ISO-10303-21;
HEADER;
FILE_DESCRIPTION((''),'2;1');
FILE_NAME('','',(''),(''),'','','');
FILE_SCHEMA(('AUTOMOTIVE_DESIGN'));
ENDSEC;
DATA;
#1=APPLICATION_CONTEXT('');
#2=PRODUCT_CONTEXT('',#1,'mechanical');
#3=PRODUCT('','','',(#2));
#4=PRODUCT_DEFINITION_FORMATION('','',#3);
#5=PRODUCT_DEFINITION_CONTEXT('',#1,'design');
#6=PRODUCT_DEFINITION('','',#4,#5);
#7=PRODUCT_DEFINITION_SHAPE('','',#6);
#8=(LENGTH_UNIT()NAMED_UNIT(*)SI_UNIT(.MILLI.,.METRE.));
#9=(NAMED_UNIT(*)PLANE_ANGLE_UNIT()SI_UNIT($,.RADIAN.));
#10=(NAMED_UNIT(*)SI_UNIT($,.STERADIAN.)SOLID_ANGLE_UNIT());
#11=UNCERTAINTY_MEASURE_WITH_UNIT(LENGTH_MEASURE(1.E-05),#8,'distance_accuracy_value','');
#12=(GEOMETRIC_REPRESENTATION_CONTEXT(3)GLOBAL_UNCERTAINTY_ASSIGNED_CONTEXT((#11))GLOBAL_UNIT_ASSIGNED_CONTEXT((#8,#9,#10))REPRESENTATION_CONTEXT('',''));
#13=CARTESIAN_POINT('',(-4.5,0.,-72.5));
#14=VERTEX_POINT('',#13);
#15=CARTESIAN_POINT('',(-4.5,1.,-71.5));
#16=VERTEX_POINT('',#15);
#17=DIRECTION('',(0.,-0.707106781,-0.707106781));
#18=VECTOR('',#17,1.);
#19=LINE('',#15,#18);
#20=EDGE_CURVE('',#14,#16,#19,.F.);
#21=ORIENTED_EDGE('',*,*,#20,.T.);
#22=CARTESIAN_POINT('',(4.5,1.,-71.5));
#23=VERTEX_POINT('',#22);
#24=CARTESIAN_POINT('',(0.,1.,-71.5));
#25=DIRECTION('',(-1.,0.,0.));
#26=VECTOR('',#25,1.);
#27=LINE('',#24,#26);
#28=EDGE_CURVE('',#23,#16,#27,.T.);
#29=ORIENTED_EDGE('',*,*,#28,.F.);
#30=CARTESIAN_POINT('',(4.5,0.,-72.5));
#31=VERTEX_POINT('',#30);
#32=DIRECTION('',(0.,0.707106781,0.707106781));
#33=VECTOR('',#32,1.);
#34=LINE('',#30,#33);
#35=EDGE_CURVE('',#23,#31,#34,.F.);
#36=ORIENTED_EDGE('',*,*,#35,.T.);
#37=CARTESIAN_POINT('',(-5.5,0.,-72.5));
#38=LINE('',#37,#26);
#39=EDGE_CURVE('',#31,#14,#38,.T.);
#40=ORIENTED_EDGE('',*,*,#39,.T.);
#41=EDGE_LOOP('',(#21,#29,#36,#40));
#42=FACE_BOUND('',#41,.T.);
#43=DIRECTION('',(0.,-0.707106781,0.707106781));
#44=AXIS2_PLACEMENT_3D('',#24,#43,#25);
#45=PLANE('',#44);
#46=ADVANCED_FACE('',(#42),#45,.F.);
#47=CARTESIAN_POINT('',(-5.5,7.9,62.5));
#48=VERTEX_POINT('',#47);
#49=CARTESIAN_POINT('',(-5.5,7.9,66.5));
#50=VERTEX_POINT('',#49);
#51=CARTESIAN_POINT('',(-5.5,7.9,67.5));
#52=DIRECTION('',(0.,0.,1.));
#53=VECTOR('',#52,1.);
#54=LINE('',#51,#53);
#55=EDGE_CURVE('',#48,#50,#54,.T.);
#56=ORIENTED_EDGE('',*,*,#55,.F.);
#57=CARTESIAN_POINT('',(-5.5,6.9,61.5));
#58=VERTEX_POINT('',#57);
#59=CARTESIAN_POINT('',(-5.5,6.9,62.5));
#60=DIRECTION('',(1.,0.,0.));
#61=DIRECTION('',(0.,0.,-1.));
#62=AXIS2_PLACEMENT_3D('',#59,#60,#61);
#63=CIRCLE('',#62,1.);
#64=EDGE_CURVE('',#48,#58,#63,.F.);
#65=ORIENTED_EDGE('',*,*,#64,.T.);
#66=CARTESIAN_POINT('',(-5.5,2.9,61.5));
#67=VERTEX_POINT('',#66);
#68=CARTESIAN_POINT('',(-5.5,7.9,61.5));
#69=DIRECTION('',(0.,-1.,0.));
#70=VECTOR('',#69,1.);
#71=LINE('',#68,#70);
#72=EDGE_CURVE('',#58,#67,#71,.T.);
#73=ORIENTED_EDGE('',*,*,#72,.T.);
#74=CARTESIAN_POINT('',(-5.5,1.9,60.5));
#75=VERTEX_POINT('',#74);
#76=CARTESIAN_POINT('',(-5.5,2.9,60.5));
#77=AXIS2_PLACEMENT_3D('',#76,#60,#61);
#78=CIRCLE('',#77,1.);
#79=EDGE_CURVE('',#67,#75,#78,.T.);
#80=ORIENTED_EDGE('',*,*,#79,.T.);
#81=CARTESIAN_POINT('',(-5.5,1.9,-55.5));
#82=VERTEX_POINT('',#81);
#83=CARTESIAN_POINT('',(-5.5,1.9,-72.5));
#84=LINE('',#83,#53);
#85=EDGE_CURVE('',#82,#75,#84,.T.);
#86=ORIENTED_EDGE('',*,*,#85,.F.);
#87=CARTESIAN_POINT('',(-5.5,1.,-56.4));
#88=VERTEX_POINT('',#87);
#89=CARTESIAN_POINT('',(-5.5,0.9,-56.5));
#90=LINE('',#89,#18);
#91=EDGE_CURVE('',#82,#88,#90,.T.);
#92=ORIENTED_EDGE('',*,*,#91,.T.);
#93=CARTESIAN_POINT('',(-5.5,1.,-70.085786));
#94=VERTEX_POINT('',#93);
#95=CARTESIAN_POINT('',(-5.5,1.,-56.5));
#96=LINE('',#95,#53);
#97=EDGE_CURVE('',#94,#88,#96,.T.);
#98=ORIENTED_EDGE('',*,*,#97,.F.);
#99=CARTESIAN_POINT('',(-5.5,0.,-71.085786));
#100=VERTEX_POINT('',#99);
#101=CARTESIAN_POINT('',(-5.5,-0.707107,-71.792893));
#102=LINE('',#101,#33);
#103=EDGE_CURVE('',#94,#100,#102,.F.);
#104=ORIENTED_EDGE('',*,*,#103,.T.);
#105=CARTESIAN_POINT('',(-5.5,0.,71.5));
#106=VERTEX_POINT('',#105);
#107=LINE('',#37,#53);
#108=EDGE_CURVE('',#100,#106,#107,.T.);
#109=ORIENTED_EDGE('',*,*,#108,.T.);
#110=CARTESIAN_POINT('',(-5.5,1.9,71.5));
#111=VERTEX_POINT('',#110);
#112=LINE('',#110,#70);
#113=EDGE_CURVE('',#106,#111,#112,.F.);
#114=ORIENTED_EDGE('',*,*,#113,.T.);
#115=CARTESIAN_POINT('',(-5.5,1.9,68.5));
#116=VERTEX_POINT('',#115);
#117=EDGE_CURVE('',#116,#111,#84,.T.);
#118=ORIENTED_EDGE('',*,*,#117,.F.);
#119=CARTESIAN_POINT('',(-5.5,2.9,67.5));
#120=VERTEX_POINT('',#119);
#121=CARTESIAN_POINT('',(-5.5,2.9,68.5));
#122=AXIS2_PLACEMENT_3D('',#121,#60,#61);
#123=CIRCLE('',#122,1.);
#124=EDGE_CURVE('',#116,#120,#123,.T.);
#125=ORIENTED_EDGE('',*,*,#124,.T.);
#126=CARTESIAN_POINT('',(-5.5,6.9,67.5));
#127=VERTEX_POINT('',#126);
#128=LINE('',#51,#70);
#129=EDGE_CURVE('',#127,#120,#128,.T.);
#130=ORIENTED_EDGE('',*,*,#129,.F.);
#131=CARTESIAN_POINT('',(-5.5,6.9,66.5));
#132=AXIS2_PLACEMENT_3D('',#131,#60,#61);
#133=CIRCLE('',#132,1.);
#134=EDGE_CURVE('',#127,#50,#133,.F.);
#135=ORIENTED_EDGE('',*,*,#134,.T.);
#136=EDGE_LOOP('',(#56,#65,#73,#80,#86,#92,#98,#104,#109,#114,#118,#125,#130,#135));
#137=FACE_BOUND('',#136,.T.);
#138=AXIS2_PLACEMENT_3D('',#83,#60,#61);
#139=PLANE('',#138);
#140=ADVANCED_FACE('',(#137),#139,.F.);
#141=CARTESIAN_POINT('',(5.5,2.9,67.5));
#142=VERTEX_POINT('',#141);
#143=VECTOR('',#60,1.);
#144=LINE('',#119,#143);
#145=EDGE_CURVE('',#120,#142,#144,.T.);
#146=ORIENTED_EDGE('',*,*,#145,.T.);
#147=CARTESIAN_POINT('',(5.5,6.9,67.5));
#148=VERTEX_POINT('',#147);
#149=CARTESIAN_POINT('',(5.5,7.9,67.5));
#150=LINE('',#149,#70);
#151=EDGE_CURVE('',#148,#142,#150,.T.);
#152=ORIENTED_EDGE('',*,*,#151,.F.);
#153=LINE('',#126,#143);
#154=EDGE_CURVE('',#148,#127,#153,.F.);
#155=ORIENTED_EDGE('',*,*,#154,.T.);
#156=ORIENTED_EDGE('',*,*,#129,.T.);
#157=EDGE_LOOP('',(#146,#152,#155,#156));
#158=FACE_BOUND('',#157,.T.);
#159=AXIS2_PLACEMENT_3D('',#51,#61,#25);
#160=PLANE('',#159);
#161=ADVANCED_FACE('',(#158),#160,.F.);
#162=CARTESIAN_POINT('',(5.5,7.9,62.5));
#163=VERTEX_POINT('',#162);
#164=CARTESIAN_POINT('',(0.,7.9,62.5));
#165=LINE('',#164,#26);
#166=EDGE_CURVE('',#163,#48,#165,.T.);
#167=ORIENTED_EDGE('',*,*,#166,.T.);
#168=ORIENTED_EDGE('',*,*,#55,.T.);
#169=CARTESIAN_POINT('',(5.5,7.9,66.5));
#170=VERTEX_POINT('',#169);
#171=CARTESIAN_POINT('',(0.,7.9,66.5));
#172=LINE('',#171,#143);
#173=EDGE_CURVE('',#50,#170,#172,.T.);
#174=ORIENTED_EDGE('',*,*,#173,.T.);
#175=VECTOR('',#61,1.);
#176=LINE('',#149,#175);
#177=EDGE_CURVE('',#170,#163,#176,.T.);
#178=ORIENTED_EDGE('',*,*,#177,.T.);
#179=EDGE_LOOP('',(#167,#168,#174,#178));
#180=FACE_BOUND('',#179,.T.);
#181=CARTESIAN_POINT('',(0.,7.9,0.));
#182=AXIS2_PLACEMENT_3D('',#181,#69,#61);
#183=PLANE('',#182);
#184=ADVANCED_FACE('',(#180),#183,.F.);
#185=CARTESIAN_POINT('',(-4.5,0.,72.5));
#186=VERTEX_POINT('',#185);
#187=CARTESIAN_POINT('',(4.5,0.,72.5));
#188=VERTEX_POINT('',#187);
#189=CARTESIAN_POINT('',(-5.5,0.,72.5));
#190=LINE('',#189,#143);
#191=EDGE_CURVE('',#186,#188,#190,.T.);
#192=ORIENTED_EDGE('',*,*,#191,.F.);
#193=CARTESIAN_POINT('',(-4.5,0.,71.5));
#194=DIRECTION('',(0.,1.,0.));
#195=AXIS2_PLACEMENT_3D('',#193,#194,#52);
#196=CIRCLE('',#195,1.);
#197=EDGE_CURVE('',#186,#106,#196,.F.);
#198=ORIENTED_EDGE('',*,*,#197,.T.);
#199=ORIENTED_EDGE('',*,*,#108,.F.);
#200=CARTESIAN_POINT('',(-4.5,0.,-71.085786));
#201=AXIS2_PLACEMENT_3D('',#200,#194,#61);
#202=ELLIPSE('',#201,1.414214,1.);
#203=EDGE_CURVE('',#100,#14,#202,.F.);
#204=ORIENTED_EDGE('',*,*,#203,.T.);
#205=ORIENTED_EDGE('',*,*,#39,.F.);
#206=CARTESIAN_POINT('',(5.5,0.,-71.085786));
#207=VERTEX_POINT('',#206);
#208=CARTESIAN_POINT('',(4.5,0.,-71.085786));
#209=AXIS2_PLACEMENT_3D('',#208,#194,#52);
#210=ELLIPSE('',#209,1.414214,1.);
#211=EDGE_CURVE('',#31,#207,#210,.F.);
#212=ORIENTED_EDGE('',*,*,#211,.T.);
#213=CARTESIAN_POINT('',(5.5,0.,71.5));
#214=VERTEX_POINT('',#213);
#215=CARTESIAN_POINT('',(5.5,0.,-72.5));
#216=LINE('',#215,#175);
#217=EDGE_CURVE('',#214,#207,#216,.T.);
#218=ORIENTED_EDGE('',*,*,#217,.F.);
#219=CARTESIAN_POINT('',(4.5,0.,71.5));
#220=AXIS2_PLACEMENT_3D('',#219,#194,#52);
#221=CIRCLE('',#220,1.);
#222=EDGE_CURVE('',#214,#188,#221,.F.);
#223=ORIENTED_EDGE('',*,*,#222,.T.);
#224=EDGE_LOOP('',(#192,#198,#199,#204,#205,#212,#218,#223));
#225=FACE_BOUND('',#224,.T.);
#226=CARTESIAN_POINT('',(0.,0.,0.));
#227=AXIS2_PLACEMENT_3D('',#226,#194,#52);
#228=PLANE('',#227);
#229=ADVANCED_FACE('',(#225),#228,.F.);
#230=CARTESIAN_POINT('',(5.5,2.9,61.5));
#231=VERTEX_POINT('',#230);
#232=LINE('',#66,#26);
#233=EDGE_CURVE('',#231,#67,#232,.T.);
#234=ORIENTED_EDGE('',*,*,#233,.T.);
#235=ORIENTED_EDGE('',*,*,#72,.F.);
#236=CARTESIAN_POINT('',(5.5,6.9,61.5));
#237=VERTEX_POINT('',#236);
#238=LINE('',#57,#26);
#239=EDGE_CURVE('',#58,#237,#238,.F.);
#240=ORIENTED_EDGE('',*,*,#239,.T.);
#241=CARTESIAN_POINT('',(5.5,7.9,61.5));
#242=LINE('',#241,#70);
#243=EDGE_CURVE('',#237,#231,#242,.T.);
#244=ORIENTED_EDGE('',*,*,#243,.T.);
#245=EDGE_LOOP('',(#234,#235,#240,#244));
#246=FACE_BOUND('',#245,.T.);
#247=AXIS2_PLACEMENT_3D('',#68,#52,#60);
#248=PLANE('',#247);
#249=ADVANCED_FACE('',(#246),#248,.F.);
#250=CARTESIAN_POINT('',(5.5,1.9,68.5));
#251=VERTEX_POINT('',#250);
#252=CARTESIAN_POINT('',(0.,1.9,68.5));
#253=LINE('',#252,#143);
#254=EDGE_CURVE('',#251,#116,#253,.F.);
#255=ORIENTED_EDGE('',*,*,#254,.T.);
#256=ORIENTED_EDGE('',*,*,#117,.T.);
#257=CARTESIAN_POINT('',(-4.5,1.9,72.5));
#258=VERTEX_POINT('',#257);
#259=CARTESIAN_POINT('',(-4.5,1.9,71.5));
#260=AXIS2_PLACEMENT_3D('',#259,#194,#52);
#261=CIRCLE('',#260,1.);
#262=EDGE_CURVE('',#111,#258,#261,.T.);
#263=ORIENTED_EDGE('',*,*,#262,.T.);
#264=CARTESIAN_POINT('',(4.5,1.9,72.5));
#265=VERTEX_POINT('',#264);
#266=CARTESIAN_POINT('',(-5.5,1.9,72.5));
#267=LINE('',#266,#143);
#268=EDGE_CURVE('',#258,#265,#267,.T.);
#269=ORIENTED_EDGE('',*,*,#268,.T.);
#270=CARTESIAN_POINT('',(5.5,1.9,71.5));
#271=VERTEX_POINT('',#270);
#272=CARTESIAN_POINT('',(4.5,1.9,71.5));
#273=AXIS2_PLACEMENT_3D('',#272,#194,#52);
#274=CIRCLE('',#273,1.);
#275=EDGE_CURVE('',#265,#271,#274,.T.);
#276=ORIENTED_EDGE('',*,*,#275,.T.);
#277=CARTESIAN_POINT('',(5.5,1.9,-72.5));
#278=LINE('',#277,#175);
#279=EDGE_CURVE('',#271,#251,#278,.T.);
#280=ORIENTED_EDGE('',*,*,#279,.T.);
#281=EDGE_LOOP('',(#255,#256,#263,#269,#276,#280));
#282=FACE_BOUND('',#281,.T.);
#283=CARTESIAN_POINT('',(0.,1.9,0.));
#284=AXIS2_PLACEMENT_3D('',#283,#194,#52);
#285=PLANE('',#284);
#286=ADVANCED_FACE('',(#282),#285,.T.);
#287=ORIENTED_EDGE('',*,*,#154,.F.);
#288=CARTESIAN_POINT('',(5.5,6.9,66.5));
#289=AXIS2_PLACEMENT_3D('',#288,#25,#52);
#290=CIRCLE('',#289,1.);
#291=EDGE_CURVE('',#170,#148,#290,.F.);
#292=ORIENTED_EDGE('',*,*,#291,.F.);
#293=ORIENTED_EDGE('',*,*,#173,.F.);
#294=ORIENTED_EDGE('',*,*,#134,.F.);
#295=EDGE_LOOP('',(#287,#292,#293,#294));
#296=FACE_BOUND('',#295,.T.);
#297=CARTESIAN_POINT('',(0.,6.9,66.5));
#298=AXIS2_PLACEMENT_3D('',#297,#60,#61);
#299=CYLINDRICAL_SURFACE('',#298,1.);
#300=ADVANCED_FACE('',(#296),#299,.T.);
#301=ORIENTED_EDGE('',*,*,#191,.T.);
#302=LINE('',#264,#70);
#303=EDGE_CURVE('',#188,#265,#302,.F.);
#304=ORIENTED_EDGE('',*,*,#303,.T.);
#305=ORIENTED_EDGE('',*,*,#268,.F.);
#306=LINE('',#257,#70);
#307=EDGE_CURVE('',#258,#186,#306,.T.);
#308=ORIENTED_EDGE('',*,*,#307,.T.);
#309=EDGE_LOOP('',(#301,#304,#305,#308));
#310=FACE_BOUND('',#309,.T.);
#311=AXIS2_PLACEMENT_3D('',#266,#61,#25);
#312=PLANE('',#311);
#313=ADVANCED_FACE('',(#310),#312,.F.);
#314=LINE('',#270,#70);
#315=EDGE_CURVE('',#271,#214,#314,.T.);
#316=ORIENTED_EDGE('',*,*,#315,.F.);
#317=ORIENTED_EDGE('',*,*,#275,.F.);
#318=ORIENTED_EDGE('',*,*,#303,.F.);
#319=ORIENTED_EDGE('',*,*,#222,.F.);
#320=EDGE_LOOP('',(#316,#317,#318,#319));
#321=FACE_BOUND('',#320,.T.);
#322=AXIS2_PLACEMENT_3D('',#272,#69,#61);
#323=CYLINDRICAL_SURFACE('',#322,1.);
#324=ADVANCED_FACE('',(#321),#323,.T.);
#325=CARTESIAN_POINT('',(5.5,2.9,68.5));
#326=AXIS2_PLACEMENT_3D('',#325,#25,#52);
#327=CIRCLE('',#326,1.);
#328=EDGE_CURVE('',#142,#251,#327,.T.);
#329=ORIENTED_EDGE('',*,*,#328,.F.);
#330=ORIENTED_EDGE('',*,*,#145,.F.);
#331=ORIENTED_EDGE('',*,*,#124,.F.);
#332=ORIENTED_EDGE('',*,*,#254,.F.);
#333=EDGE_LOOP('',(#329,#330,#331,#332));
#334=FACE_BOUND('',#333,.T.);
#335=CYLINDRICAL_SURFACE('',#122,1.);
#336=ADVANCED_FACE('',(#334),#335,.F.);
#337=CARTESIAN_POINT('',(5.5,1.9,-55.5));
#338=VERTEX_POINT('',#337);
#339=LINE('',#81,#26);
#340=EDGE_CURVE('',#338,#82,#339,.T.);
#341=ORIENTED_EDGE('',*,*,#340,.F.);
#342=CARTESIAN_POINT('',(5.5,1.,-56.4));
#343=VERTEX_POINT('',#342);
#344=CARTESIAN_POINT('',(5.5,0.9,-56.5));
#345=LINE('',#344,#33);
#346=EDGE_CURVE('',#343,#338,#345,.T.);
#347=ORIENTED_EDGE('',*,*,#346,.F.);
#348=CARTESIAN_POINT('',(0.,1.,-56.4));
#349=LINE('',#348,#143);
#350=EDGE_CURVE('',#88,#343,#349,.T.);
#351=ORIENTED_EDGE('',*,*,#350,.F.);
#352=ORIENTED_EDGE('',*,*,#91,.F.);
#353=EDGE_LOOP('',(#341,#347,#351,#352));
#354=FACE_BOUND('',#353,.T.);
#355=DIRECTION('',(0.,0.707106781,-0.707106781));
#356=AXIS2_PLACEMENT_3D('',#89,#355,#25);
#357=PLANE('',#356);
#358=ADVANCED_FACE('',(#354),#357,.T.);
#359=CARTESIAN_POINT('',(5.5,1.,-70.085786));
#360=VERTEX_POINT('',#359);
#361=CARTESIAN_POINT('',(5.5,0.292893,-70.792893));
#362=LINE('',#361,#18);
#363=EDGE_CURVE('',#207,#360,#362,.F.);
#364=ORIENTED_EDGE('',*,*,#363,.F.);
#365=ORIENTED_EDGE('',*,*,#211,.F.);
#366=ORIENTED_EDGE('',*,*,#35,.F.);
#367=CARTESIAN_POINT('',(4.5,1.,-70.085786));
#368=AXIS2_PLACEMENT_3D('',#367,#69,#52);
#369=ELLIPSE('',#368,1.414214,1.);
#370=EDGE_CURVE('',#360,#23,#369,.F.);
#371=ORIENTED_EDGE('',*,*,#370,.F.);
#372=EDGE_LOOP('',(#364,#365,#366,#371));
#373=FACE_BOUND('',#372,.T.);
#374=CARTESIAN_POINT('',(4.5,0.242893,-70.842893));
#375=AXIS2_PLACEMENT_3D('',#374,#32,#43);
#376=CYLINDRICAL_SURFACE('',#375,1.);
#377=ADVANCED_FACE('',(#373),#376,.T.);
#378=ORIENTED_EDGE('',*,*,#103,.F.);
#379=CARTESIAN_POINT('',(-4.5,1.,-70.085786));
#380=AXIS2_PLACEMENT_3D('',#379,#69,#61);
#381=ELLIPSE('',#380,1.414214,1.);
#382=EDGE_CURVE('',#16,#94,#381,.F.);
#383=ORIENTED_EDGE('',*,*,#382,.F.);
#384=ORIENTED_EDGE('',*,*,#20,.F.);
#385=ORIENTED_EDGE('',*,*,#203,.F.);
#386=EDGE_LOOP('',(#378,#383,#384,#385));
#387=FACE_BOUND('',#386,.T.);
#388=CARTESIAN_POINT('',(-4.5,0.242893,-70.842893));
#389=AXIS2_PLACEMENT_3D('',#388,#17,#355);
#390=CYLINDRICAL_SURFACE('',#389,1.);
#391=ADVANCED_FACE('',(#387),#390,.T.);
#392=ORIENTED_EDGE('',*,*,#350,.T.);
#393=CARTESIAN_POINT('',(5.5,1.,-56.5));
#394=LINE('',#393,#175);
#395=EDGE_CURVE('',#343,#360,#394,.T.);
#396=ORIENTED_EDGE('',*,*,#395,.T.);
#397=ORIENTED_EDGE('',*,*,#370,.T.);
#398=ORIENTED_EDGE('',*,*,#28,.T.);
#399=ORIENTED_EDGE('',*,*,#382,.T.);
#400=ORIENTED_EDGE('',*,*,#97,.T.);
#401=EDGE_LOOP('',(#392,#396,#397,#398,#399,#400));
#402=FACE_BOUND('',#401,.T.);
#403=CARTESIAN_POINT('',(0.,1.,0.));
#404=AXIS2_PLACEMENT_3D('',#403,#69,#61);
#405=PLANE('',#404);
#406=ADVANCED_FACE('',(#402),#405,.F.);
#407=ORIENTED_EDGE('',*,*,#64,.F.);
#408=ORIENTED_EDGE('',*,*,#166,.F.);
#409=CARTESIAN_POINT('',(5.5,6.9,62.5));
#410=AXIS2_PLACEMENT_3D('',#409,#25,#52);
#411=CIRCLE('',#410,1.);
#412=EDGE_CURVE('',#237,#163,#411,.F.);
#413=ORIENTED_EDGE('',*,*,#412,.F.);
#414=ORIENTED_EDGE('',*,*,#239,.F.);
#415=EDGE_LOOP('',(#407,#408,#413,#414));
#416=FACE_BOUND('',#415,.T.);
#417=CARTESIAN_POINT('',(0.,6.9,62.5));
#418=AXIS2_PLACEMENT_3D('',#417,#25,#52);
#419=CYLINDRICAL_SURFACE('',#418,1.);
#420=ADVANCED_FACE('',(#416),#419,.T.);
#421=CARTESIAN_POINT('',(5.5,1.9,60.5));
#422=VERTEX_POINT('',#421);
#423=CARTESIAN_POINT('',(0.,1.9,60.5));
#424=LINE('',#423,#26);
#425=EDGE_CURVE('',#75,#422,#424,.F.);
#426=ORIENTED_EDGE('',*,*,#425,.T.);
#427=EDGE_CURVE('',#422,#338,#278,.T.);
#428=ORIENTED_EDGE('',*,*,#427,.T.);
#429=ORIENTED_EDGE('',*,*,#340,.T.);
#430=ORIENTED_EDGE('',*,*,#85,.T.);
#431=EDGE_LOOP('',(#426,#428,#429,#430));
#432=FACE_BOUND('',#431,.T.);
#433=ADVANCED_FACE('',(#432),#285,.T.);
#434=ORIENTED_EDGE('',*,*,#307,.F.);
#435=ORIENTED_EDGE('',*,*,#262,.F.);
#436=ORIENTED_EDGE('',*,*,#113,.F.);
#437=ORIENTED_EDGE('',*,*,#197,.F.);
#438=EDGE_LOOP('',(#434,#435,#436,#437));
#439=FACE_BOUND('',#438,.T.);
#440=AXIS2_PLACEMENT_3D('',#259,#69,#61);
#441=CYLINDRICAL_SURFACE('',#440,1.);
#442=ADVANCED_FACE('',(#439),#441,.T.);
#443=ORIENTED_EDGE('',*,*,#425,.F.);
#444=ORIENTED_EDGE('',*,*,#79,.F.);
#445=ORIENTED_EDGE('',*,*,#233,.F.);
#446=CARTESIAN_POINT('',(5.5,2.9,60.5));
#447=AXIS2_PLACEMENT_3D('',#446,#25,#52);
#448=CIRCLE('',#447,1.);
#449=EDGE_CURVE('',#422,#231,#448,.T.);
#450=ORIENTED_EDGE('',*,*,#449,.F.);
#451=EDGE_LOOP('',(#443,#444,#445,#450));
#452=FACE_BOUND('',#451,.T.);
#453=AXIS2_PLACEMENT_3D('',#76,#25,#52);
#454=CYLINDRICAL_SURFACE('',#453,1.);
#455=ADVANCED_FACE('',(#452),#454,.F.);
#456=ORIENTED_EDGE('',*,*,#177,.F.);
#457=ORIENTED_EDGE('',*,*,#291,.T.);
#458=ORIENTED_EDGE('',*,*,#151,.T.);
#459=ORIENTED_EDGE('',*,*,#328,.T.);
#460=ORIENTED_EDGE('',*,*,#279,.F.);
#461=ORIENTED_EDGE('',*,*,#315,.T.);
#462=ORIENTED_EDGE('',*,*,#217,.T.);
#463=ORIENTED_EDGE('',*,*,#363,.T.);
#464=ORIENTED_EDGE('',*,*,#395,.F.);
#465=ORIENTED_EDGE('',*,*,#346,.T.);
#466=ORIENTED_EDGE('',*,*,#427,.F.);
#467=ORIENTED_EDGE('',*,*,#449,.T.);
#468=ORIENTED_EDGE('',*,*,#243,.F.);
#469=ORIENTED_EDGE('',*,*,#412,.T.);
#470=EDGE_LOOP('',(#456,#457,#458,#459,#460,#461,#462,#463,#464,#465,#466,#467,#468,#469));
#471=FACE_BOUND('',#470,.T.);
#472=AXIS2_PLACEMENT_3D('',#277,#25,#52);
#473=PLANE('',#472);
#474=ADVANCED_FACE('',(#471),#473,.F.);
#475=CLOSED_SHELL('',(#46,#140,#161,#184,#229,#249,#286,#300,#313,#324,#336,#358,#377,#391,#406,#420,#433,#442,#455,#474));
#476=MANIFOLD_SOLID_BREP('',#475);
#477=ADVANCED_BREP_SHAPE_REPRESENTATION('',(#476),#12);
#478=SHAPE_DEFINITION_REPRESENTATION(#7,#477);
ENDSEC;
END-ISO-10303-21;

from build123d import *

# Parameters (mm, degrees)
SZKIC1_W                    = 11
SZKIC1_H                    = 145
DODANIE_WYCI_GNI_CIE1_DEPTH = 1.9
SZKIC3_W                    = 11
SZKIC3_H                    = 16
WYTNIJ_WYCI_GNI_CIE1_DEPTH  = 0.9
SFAZOWANIE1_SIZE            = 1
SZKIC2_W                    = 11
SZKIC2_H                    = 6
DODANIE_WYCI_GNI_CIE2_DEPTH = 6
ZAOKR_GLENIE1_R             = 1


with BuildPart() as part:
    # Szkic1 → Dodanie-wyciągnięcie1 (new body)
    with BuildSketch(Plane(origin=(0, 0, 0), x_dir=(1, 0, 0), z_dir=(0, 1, 0))):
        Rectangle(SZKIC1_W, SZKIC1_H)
    extrude(amount=DODANIE_WYCI_GNI_CIE1_DEPTH)

    # Szkic3 → Wytnij-wyciągnięcie1 (cut)
    with BuildSketch(Plane(origin=(0, 1.9, 0), x_dir=(1, 0, 0), z_dir=(0, 1, 0))):
        with Locations((0, 64.5)):
            Rectangle(SZKIC3_W, SZKIC3_H)
    extrude(amount=-WYTNIJ_WYCI_GNI_CIE1_DEPTH, mode=Mode.SUBTRACT)

    # Sfazowanie1
    # the kernel refuses this chamfer: 1 mm, written as the material it takes off along each edge
    with BuildSketch(Plane(origin=(-8.071682988, 1.9, -56.5), x_dir=(0, 0.0274958766105862, 0.9996219169112968), z_dir=(1, 0, 0))) as sfazowanie1_piece_1_section:
        Polygon((SFAZOWANIE1_SIZE * 0.999621916911, SFAZOWANIE1_SIZE * 0.0274958766106), (-SFAZOWANIE1_SIZE * 0.0274958766106, SFAZOWANIE1_SIZE * 0.999621916911), (0, 0), align=None)
    sfazowanie1_piece_1 = extrude(amount=16.143365976, mode=Mode.PRIVATE)
    sfazowanie1_piece_1 = split(sfazowanie1_piece_1, bisect_by=Plane(origin=(0, 1, -56.164099253), z_dir=(0, 1, 0)), keep=Keep.TOP, mode=Mode.PRIVATE)
    add(sfazowanie1_piece_1, mode=Mode.SUBTRACT)
    with BuildSketch(Plane(origin=(8.071682988, 1, -72.5), x_dir=(0, -0.999621916911297, -0.02749587661058218), z_dir=(-1, 0, 0))) as sfazowanie1_piece_2:
        Polygon((SFAZOWANIE1_SIZE * 0.999621916911, SFAZOWANIE1_SIZE * 0.0274958766106), (-SFAZOWANIE1_SIZE * 0.0274958766106, SFAZOWANIE1_SIZE * 0.999621916911), (0, 0), align=None)
    extrude(amount=16.143365976, mode=Mode.SUBTRACT)

    # Szkic2 → Dodanie-wyciągnięcie2 (add)
    with BuildSketch(Plane(origin=(0, 1.9, 0), x_dir=(1, 0, 0), z_dir=(0, 1, 0))):
        with Locations((0, -64.5)):
            Rectangle(SZKIC2_W, SZKIC2_H)
    extrude(amount=DODANIE_WYCI_GNI_CIE2_DEPTH)

    # Zaokrąglenie1
    zaokr_glenie1_edges = [part.edges().sort_by_distance(p)[0] for p in [
        (5.5, 0.5, -72),
        (-5.5, 0.5, -72),
        (0, 1.9, 67.5),
        (0, 1.9, 61.5),
        (0, 7.9, 67.5),
        (0, 7.9, 61.5),
        (5.5, 0.95, 72.5),
        (-5.5, 0.95, 72.5),
    ]]
    fillet(zaokr_glenie1_edges, radius=ZAOKR_GLENIE1_R)


solid = part.part
